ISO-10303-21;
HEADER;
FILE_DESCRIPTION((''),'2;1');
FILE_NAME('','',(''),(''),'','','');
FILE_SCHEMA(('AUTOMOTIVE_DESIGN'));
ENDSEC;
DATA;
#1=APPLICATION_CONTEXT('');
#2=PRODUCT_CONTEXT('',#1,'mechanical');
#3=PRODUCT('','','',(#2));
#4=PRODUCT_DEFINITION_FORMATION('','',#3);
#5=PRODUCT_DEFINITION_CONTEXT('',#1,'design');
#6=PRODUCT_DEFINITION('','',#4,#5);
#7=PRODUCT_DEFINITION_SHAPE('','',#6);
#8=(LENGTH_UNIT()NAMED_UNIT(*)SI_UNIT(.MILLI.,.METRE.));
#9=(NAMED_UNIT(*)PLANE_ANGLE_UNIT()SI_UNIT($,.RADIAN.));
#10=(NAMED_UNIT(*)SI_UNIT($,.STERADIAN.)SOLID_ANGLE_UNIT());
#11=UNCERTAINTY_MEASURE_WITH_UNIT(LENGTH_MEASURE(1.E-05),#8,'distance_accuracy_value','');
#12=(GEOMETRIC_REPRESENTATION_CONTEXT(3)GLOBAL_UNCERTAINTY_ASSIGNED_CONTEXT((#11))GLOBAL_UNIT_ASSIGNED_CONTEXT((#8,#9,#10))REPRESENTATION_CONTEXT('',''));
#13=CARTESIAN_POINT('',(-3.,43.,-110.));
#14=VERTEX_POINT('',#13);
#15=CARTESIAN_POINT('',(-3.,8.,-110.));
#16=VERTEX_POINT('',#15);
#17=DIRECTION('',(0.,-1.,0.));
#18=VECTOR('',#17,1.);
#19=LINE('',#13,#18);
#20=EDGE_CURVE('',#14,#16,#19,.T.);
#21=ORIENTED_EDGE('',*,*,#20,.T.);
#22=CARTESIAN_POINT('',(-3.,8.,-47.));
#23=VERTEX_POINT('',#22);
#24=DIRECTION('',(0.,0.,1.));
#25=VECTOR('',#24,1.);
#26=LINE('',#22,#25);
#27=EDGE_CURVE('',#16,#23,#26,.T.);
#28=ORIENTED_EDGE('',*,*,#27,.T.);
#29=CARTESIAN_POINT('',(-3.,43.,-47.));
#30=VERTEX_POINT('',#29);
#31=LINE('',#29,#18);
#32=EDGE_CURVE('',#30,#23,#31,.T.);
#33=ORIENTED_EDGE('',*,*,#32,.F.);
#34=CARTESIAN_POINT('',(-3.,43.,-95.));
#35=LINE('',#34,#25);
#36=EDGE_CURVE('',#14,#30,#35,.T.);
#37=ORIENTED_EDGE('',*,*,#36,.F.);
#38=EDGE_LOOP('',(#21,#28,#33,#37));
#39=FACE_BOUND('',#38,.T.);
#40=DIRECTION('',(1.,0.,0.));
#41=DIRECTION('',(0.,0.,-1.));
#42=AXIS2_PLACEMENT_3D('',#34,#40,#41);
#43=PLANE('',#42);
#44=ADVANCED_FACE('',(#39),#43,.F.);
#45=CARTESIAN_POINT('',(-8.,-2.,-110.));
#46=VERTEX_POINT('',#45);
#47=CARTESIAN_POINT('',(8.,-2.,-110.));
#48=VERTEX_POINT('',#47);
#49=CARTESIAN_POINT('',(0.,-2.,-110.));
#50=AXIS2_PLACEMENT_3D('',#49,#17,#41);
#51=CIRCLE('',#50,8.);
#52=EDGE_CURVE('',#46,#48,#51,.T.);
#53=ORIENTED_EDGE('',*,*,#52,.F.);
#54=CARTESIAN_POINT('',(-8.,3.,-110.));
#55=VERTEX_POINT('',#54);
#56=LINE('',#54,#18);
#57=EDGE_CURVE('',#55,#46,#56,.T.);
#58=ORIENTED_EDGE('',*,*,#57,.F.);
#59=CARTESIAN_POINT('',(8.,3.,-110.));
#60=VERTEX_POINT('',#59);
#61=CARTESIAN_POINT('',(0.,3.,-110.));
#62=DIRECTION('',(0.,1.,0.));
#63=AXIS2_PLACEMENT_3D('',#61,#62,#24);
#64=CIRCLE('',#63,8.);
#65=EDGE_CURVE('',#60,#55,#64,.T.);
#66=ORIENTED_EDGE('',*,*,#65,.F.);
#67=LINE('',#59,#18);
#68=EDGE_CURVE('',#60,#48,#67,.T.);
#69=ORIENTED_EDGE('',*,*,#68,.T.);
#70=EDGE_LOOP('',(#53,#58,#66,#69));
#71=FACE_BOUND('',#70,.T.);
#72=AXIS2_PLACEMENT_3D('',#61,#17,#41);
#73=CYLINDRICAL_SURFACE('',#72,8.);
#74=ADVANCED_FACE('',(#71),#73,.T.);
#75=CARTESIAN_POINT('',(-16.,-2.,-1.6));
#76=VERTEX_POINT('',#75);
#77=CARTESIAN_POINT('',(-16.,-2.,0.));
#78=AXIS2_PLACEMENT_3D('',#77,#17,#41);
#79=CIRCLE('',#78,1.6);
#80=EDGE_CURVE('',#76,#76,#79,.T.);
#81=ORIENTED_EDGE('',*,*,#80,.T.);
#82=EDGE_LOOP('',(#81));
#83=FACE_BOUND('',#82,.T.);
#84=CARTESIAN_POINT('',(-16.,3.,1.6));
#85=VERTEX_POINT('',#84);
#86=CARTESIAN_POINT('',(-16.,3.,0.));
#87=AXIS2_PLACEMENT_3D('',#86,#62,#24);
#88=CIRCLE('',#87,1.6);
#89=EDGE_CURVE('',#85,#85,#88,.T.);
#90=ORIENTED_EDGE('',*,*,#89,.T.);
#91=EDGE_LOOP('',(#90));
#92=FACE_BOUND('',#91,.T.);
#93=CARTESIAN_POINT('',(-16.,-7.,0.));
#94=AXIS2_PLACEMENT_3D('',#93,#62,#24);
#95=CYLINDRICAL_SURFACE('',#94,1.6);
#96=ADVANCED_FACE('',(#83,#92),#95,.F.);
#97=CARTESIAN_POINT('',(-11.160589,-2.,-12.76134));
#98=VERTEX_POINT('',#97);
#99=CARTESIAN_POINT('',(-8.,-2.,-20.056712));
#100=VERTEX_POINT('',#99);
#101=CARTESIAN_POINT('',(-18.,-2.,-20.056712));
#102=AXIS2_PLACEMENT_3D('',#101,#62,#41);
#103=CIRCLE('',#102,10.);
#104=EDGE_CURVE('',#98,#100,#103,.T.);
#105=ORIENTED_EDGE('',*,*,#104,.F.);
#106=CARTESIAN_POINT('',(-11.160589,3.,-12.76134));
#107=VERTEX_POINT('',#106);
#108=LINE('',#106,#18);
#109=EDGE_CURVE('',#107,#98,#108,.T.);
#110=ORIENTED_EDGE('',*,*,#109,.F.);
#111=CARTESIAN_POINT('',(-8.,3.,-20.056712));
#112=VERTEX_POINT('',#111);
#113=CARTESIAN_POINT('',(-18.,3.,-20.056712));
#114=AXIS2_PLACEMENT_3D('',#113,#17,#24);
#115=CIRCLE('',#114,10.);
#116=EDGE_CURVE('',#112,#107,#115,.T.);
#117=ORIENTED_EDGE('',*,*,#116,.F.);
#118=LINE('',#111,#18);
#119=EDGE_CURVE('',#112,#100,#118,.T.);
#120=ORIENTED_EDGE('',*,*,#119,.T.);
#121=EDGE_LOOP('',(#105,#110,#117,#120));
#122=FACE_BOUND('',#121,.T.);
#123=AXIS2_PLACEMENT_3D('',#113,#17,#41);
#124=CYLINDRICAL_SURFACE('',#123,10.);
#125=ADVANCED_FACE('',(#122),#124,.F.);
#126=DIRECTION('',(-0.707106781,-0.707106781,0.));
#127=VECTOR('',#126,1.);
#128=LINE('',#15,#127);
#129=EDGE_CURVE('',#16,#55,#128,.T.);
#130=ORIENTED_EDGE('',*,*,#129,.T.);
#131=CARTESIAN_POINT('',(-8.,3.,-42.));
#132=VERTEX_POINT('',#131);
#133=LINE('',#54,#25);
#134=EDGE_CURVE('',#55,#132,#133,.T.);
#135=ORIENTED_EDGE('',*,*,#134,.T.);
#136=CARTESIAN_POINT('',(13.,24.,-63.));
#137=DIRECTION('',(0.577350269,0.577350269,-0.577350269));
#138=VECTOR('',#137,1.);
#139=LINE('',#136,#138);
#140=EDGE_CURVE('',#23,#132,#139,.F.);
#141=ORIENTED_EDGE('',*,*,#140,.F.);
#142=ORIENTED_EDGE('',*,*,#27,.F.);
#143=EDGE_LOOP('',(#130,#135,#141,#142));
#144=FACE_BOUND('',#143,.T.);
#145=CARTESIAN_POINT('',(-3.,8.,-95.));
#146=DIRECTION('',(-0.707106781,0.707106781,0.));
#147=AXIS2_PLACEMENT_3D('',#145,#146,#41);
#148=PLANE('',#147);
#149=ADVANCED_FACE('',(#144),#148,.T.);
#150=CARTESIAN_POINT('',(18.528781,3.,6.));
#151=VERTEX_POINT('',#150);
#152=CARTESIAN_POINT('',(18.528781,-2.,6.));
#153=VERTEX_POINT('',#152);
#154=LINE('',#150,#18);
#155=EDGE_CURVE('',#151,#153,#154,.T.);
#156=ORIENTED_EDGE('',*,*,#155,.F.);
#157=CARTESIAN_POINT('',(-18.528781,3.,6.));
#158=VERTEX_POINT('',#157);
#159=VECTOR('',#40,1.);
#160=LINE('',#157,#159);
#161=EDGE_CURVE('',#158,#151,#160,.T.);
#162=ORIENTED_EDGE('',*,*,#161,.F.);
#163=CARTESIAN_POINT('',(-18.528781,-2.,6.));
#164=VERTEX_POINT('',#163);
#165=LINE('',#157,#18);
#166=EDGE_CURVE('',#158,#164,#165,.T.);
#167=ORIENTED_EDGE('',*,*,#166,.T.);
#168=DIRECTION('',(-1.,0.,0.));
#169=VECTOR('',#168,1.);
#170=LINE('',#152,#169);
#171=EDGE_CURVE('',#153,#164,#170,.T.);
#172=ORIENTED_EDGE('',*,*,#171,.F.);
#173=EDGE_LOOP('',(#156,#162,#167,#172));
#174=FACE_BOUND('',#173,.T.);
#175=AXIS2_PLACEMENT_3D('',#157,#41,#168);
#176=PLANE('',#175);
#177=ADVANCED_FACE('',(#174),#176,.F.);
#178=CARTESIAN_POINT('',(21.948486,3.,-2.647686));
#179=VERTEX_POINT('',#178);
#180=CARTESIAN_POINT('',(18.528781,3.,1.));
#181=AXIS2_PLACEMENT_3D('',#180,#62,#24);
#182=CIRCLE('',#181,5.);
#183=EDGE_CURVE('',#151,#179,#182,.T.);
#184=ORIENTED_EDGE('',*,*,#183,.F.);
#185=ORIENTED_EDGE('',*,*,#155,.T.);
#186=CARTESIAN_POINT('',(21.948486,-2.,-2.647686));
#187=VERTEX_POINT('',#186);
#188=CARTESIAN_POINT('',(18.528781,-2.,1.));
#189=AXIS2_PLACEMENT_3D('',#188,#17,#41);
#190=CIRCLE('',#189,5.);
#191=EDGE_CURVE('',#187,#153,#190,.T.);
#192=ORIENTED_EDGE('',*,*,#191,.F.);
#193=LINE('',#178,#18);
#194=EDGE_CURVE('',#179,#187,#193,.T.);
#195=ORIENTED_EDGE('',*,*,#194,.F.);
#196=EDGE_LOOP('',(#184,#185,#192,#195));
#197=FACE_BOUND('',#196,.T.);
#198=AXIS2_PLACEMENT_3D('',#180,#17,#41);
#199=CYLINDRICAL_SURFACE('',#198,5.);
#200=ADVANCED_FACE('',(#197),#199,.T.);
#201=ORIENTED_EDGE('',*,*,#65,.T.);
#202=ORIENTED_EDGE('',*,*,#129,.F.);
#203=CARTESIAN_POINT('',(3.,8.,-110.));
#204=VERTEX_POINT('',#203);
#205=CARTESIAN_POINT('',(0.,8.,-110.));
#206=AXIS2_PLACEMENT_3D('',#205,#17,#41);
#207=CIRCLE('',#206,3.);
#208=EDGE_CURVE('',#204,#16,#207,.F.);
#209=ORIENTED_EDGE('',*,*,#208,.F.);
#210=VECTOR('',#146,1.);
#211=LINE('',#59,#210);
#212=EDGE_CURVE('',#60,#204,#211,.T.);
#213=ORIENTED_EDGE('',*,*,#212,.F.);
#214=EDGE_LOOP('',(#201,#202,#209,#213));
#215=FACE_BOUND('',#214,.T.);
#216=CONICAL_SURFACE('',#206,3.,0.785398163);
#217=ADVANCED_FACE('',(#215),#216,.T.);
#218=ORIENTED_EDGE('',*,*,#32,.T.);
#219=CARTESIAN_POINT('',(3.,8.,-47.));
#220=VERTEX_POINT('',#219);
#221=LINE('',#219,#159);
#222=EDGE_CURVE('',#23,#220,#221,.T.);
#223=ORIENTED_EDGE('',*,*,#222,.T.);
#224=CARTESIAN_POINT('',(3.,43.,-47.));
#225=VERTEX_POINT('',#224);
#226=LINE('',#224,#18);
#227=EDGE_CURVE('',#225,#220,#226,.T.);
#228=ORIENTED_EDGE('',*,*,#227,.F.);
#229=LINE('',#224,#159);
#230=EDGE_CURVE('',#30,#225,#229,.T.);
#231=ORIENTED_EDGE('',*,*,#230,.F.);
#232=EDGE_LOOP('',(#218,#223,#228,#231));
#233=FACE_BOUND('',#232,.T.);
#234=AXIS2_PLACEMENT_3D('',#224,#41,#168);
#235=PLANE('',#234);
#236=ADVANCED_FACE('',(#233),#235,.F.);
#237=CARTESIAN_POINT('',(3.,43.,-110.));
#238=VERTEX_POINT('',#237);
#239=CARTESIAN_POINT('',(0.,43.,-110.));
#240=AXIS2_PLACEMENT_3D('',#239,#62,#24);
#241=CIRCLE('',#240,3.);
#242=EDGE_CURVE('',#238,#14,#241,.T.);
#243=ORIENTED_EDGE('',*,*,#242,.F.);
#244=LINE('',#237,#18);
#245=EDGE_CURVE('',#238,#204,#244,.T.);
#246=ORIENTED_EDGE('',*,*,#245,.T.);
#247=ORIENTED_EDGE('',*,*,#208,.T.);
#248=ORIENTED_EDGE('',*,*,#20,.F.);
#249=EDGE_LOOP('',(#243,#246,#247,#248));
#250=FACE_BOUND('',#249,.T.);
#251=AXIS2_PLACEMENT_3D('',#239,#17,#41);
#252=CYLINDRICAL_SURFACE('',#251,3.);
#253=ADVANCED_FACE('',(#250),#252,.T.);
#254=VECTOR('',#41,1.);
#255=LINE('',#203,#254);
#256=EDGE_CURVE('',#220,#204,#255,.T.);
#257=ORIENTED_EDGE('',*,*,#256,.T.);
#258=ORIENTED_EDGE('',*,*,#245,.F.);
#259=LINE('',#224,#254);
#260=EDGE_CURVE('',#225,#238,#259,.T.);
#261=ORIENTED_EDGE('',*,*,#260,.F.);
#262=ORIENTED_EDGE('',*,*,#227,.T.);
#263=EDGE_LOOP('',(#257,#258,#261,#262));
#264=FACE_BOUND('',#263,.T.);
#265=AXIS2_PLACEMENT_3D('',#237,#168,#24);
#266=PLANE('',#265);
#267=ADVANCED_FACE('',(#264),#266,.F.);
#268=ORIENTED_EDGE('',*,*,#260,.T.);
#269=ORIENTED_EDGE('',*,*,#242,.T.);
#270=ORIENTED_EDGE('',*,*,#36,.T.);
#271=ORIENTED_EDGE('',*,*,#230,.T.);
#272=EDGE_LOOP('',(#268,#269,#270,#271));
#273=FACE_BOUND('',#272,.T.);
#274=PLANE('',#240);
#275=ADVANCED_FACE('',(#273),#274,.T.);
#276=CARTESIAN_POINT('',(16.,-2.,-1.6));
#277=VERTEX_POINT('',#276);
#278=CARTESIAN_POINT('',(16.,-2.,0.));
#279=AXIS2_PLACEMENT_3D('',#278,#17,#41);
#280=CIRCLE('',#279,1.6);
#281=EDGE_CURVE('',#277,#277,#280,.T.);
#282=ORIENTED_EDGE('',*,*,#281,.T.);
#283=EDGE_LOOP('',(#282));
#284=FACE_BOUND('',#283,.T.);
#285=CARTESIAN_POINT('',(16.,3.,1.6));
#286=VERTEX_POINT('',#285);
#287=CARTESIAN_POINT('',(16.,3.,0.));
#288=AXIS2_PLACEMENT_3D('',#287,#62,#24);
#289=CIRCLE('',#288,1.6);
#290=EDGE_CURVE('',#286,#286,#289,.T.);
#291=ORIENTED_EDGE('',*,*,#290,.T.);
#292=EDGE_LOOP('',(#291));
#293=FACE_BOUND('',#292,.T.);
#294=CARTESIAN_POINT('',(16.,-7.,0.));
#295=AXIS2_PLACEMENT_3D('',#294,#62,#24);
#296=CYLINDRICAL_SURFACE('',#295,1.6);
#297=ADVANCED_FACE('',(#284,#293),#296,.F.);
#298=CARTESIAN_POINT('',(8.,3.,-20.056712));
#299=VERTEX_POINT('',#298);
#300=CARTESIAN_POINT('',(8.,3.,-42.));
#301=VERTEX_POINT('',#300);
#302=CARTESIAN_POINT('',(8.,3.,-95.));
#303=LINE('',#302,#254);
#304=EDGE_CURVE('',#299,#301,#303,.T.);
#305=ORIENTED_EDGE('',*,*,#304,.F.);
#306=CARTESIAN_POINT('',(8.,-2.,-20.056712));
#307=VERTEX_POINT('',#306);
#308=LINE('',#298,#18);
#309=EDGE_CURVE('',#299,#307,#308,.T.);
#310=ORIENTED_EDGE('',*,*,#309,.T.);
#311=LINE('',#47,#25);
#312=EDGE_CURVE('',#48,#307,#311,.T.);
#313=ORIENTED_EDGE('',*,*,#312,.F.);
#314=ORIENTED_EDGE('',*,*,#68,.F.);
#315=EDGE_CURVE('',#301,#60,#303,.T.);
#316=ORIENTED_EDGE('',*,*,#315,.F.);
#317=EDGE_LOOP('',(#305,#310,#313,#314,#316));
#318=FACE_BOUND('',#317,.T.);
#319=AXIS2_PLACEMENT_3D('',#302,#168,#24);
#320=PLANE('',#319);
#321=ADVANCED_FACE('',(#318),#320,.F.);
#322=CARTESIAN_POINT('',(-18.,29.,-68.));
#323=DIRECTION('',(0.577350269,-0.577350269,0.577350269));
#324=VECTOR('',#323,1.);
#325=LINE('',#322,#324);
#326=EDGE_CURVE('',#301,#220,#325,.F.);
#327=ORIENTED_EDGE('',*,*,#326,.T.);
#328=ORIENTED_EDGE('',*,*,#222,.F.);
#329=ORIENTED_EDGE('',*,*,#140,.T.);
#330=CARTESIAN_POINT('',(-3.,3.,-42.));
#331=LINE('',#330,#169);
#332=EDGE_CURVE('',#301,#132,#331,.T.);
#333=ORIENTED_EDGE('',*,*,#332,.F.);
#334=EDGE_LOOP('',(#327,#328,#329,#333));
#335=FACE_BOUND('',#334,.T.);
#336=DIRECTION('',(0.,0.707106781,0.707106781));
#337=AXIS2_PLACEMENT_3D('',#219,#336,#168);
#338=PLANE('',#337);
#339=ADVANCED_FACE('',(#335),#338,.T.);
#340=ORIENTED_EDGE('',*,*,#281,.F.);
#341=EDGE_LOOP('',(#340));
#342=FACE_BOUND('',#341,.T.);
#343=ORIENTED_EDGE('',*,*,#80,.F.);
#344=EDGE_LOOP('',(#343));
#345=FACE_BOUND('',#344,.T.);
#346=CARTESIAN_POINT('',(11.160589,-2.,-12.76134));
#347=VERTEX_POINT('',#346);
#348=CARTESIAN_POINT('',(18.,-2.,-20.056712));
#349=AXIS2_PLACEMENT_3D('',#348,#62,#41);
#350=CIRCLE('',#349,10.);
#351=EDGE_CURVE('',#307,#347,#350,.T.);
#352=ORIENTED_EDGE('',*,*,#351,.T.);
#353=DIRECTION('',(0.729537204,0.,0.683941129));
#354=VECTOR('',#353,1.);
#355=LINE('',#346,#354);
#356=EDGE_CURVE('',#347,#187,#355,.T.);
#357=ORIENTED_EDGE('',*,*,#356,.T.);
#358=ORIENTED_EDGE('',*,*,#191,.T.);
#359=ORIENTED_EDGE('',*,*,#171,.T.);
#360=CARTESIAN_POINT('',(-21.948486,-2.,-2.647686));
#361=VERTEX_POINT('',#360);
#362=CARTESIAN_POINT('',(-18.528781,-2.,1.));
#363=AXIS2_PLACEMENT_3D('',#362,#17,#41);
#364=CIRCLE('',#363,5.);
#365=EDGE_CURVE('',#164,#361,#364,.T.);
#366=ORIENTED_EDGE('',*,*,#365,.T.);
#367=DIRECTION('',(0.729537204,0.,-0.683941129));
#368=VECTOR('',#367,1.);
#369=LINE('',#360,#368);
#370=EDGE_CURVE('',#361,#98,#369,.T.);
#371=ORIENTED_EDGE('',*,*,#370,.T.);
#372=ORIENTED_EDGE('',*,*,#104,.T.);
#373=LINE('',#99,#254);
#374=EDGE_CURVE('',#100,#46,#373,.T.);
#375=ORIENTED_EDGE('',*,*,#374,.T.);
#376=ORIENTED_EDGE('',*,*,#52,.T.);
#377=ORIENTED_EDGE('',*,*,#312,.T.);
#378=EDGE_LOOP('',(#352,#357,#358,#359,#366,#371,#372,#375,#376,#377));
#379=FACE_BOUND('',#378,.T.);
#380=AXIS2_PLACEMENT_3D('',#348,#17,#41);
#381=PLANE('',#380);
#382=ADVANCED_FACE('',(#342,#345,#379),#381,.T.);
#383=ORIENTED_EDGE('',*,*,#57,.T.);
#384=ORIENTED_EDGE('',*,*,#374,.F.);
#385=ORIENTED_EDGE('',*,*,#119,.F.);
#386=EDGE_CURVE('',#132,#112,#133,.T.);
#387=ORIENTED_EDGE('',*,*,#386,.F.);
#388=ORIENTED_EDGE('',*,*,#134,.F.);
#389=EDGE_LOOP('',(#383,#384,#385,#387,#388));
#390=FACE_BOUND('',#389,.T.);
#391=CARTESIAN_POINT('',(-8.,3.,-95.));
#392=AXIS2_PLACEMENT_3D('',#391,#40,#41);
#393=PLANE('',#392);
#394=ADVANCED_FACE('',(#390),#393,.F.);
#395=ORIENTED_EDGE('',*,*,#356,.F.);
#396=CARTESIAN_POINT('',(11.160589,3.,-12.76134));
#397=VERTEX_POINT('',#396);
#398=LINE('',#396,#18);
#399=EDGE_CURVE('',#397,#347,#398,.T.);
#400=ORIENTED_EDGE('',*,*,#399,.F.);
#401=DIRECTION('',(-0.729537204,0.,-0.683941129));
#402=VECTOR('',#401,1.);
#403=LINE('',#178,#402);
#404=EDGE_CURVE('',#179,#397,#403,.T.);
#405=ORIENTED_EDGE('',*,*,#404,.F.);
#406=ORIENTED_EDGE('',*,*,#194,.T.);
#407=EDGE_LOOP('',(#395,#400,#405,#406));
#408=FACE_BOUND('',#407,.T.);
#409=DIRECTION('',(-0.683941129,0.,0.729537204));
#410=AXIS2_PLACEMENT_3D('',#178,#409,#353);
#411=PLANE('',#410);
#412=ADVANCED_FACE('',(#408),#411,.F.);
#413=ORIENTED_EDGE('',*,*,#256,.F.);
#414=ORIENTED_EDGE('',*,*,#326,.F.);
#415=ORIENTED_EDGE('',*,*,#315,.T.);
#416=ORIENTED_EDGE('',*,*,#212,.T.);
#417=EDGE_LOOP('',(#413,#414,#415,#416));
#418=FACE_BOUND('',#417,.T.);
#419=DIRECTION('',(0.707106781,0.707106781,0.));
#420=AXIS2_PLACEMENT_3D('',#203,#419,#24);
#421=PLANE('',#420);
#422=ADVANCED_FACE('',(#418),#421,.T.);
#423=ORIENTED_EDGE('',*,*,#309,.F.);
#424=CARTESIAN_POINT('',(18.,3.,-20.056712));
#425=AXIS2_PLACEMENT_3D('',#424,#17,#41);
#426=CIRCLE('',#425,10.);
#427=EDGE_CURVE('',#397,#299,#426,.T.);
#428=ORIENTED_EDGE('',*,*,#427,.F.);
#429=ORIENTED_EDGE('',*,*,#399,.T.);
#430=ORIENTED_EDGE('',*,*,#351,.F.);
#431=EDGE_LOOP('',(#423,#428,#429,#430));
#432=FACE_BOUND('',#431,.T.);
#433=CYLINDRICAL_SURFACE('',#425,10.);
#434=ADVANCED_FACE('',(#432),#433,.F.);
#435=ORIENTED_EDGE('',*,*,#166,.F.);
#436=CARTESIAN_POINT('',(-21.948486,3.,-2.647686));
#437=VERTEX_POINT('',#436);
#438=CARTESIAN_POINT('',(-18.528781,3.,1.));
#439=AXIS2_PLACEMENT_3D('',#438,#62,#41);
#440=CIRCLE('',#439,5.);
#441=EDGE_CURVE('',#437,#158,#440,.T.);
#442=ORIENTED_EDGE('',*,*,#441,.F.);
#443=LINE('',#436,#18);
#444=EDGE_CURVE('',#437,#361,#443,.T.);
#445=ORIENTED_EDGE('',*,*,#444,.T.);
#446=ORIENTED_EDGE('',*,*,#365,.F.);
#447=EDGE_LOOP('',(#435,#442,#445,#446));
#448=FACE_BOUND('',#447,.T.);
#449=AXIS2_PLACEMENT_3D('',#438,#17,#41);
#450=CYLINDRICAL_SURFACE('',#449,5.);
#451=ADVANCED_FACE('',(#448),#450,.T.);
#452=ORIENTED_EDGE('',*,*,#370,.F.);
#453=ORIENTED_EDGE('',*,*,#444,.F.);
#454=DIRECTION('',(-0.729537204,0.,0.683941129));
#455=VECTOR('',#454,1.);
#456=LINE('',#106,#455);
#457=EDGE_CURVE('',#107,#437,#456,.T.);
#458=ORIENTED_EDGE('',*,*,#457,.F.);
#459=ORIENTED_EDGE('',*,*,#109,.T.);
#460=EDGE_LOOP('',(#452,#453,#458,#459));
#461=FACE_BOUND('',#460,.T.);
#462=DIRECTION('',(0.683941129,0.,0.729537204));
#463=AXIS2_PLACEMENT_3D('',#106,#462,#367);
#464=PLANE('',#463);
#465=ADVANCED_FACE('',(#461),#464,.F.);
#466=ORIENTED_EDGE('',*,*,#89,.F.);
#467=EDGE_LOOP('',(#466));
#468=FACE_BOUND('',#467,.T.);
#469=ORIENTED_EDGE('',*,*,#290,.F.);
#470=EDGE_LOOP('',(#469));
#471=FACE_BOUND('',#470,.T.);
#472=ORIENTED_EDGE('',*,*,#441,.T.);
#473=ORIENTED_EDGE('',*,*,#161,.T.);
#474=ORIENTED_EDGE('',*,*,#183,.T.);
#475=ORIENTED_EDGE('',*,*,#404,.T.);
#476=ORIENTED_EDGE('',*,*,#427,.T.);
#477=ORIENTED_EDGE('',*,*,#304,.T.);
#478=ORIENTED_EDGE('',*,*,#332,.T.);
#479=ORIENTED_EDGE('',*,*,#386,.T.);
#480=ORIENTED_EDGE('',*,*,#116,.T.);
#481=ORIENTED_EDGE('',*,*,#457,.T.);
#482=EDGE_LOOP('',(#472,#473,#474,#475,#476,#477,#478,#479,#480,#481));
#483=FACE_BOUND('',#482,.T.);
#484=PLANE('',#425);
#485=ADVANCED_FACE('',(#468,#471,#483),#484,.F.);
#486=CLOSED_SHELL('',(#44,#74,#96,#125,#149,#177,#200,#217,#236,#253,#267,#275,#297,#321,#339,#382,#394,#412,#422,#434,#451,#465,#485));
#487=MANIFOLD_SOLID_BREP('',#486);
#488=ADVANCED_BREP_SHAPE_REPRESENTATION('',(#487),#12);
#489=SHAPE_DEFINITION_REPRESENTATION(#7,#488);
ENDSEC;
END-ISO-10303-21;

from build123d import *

# Parameters (mm, degrees)
SKETCH1_R           = 1
BOSS_EXTRUDE1_DEPTH = 3
BOSS_EXTRUDE2_DEPTH = 40
CHAMFER1_SIZE       = 5
SKETCH3_R           = 1.6
CUT_EXTRUDE1_DEPTH  = 10
BOSS_EXTRUDE3_START = -3
SKETCH4_R           = 1
BOSS_EXTRUDE3_DEPTH = 3
BOSS_EXTRUDE4_START = 2
SKETCH5_R           = 1.6
BOSS_EXTRUDE4_DEPTH = 2


with BuildPart() as part:
    # Sketch1 → Boss-Extrude1 (new body)
    with BuildSketch(Plane(origin=(0, 0, 0), x_dir=(1, 0, 0), z_dir=(0, 1, 0))):
        with BuildLine():
            Line((-18.528780813, -6), (18.528780813, -6))
            ThreePointArc((18.528780813, -6), (23.17842758, -2.838691096), (21.948486458, 2.647686021))
            Line((21.948486458, 2.647686021), (11.160588711, 12.761340158))
            ThreePointArc((11.160588711, 12.761340158), (8.824104597, 16.081420568), (8, 20.056712199))
            Line((8, 20.056712199), (8, 95))
            Line((8, 95), (8, 110))
            ThreePointArc((8, 110), (0, 118), (-8, 110))
            Line((-8, 110), (-8, 95))
            Line((-8, 95), (-8, 20.056712199))
            ThreePointArc((-8, 20.056712199), (-8.824104597, 16.081420568), (-11.160588711, 12.761340158))
            Line((-11.160588711, 12.761340158), (-21.948486458, 2.647686021))
            ThreePointArc((-21.948486458, 2.647686021), (-23.17842758, -2.838691096), (-18.528780813, -6))
        make_face()
        with Locations(Location((0, 15, 0), (0, 0, 270))):
            Circle(SKETCH1_R, mode=Mode.SUBTRACT)
        with Locations(Location((-16, 0, 0), (0, 0, 270))):
            Circle(SKETCH1_R, mode=Mode.SUBTRACT)
        with Locations(Location((16, 0, 0), (0, 0, 270))):
            Circle(SKETCH1_R, mode=Mode.SUBTRACT)
    extrude(amount=BOSS_EXTRUDE1_DEPTH)

    # Sketch2 → Boss-Extrude2 (add)
    with BuildSketch(Plane(origin=(0, 3, 0), x_dir=(1, 0, 0), z_dir=(0, 1, 0))):
        with BuildLine():
            Line((3, 47), (-3, 47))
            Line((-3, 47), (-3, 95))
            Line((-3, 95), (-3, 110))
            ThreePointArc((-3, 110), (0, 113), (3, 110))
            Line((3, 110), (3, 95))
            Line((3, 95), (3, 47))
        make_face()
    extrude(amount=BOSS_EXTRUDE2_DEPTH)

    # Chamfer1
    chamfer1_edges = [part.edges().sort_by_distance(p)[0] for p in [
        (3, 3, -78.5),
        (0, 3, -113),
        (-3, 3, -78.5),
        (0, 3, -47),
    ]]
    chamfer(chamfer1_edges, length=CHAMFER1_SIZE - 0.0001)  # a hair under: the kernel refuses the full size

    # Sketch3 → Cut-Extrude1 (cut)
    with BuildSketch(Plane(origin=(0, 3, 0), x_dir=(1, 0, 0), z_dir=(0, 1, 0))):
        with Locations(Location((-16, 0, 0), (0, 0, 270))):
            Circle(SKETCH3_R)
        with Locations(Location((16, 0, 0), (0, 0, 270))):
            Circle(SKETCH3_R)
    extrude(amount=-CUT_EXTRUDE1_DEPTH, mode=Mode.SUBTRACT)

    # Sketch4 → Boss-Extrude3 (add)
    with BuildSketch(Plane(origin=(0, 3, 0), x_dir=(1, 0, 0), z_dir=(0, 1, 0)).offset(BOSS_EXTRUDE3_START)):
        with Locations((0, 15)):
            Circle(SKETCH4_R)
    extrude(amount=BOSS_EXTRUDE3_DEPTH)

    # Sketch5 → Boss-Extrude4 (add)
    with BuildSketch(Plane.XZ.offset(BOSS_EXTRUDE4_START)):
        with BuildLine():
            Line((11.160588711, -12.761340158), (21.948486458, -2.647686021))
            ThreePointArc((21.948486458, -2.647686021), (23.17842758, 2.838691096), (18.528780813, 6))
            Line((18.528780813, 6), (-18.528780813, 6))
            ThreePointArc((-18.528780813, 6), (-23.17842758, 2.838691096), (-21.948486458, -2.647686021))
            Line((-21.948486458, -2.647686021), (-11.160588711, -12.761340158))
            ThreePointArc((-11.160588711, -12.761340158), (-8.824104597, -16.081420568), (-8, -20.056712199))
            Line((-8, -20.056712199), (-8, -110))
            ThreePointArc((-8, -110), (0, -118), (8, -110))
            Line((8, -110), (8, -20.056712199))
            ThreePointArc((8, -20.056712199), (8.824104597, -16.081420568), (11.160588711, -12.761340158))
        make_face()
        with Locations(Location((-16, 0, 0), (0, 0, 90))):
            Circle(SKETCH5_R, mode=Mode.SUBTRACT)
        with Locations(Location((16, 0, 0), (0, 0, 90))):
            Circle(SKETCH5_R, mode=Mode.SUBTRACT)
    extrude(amount=-BOSS_EXTRUDE4_DEPTH)


solid = part.part
